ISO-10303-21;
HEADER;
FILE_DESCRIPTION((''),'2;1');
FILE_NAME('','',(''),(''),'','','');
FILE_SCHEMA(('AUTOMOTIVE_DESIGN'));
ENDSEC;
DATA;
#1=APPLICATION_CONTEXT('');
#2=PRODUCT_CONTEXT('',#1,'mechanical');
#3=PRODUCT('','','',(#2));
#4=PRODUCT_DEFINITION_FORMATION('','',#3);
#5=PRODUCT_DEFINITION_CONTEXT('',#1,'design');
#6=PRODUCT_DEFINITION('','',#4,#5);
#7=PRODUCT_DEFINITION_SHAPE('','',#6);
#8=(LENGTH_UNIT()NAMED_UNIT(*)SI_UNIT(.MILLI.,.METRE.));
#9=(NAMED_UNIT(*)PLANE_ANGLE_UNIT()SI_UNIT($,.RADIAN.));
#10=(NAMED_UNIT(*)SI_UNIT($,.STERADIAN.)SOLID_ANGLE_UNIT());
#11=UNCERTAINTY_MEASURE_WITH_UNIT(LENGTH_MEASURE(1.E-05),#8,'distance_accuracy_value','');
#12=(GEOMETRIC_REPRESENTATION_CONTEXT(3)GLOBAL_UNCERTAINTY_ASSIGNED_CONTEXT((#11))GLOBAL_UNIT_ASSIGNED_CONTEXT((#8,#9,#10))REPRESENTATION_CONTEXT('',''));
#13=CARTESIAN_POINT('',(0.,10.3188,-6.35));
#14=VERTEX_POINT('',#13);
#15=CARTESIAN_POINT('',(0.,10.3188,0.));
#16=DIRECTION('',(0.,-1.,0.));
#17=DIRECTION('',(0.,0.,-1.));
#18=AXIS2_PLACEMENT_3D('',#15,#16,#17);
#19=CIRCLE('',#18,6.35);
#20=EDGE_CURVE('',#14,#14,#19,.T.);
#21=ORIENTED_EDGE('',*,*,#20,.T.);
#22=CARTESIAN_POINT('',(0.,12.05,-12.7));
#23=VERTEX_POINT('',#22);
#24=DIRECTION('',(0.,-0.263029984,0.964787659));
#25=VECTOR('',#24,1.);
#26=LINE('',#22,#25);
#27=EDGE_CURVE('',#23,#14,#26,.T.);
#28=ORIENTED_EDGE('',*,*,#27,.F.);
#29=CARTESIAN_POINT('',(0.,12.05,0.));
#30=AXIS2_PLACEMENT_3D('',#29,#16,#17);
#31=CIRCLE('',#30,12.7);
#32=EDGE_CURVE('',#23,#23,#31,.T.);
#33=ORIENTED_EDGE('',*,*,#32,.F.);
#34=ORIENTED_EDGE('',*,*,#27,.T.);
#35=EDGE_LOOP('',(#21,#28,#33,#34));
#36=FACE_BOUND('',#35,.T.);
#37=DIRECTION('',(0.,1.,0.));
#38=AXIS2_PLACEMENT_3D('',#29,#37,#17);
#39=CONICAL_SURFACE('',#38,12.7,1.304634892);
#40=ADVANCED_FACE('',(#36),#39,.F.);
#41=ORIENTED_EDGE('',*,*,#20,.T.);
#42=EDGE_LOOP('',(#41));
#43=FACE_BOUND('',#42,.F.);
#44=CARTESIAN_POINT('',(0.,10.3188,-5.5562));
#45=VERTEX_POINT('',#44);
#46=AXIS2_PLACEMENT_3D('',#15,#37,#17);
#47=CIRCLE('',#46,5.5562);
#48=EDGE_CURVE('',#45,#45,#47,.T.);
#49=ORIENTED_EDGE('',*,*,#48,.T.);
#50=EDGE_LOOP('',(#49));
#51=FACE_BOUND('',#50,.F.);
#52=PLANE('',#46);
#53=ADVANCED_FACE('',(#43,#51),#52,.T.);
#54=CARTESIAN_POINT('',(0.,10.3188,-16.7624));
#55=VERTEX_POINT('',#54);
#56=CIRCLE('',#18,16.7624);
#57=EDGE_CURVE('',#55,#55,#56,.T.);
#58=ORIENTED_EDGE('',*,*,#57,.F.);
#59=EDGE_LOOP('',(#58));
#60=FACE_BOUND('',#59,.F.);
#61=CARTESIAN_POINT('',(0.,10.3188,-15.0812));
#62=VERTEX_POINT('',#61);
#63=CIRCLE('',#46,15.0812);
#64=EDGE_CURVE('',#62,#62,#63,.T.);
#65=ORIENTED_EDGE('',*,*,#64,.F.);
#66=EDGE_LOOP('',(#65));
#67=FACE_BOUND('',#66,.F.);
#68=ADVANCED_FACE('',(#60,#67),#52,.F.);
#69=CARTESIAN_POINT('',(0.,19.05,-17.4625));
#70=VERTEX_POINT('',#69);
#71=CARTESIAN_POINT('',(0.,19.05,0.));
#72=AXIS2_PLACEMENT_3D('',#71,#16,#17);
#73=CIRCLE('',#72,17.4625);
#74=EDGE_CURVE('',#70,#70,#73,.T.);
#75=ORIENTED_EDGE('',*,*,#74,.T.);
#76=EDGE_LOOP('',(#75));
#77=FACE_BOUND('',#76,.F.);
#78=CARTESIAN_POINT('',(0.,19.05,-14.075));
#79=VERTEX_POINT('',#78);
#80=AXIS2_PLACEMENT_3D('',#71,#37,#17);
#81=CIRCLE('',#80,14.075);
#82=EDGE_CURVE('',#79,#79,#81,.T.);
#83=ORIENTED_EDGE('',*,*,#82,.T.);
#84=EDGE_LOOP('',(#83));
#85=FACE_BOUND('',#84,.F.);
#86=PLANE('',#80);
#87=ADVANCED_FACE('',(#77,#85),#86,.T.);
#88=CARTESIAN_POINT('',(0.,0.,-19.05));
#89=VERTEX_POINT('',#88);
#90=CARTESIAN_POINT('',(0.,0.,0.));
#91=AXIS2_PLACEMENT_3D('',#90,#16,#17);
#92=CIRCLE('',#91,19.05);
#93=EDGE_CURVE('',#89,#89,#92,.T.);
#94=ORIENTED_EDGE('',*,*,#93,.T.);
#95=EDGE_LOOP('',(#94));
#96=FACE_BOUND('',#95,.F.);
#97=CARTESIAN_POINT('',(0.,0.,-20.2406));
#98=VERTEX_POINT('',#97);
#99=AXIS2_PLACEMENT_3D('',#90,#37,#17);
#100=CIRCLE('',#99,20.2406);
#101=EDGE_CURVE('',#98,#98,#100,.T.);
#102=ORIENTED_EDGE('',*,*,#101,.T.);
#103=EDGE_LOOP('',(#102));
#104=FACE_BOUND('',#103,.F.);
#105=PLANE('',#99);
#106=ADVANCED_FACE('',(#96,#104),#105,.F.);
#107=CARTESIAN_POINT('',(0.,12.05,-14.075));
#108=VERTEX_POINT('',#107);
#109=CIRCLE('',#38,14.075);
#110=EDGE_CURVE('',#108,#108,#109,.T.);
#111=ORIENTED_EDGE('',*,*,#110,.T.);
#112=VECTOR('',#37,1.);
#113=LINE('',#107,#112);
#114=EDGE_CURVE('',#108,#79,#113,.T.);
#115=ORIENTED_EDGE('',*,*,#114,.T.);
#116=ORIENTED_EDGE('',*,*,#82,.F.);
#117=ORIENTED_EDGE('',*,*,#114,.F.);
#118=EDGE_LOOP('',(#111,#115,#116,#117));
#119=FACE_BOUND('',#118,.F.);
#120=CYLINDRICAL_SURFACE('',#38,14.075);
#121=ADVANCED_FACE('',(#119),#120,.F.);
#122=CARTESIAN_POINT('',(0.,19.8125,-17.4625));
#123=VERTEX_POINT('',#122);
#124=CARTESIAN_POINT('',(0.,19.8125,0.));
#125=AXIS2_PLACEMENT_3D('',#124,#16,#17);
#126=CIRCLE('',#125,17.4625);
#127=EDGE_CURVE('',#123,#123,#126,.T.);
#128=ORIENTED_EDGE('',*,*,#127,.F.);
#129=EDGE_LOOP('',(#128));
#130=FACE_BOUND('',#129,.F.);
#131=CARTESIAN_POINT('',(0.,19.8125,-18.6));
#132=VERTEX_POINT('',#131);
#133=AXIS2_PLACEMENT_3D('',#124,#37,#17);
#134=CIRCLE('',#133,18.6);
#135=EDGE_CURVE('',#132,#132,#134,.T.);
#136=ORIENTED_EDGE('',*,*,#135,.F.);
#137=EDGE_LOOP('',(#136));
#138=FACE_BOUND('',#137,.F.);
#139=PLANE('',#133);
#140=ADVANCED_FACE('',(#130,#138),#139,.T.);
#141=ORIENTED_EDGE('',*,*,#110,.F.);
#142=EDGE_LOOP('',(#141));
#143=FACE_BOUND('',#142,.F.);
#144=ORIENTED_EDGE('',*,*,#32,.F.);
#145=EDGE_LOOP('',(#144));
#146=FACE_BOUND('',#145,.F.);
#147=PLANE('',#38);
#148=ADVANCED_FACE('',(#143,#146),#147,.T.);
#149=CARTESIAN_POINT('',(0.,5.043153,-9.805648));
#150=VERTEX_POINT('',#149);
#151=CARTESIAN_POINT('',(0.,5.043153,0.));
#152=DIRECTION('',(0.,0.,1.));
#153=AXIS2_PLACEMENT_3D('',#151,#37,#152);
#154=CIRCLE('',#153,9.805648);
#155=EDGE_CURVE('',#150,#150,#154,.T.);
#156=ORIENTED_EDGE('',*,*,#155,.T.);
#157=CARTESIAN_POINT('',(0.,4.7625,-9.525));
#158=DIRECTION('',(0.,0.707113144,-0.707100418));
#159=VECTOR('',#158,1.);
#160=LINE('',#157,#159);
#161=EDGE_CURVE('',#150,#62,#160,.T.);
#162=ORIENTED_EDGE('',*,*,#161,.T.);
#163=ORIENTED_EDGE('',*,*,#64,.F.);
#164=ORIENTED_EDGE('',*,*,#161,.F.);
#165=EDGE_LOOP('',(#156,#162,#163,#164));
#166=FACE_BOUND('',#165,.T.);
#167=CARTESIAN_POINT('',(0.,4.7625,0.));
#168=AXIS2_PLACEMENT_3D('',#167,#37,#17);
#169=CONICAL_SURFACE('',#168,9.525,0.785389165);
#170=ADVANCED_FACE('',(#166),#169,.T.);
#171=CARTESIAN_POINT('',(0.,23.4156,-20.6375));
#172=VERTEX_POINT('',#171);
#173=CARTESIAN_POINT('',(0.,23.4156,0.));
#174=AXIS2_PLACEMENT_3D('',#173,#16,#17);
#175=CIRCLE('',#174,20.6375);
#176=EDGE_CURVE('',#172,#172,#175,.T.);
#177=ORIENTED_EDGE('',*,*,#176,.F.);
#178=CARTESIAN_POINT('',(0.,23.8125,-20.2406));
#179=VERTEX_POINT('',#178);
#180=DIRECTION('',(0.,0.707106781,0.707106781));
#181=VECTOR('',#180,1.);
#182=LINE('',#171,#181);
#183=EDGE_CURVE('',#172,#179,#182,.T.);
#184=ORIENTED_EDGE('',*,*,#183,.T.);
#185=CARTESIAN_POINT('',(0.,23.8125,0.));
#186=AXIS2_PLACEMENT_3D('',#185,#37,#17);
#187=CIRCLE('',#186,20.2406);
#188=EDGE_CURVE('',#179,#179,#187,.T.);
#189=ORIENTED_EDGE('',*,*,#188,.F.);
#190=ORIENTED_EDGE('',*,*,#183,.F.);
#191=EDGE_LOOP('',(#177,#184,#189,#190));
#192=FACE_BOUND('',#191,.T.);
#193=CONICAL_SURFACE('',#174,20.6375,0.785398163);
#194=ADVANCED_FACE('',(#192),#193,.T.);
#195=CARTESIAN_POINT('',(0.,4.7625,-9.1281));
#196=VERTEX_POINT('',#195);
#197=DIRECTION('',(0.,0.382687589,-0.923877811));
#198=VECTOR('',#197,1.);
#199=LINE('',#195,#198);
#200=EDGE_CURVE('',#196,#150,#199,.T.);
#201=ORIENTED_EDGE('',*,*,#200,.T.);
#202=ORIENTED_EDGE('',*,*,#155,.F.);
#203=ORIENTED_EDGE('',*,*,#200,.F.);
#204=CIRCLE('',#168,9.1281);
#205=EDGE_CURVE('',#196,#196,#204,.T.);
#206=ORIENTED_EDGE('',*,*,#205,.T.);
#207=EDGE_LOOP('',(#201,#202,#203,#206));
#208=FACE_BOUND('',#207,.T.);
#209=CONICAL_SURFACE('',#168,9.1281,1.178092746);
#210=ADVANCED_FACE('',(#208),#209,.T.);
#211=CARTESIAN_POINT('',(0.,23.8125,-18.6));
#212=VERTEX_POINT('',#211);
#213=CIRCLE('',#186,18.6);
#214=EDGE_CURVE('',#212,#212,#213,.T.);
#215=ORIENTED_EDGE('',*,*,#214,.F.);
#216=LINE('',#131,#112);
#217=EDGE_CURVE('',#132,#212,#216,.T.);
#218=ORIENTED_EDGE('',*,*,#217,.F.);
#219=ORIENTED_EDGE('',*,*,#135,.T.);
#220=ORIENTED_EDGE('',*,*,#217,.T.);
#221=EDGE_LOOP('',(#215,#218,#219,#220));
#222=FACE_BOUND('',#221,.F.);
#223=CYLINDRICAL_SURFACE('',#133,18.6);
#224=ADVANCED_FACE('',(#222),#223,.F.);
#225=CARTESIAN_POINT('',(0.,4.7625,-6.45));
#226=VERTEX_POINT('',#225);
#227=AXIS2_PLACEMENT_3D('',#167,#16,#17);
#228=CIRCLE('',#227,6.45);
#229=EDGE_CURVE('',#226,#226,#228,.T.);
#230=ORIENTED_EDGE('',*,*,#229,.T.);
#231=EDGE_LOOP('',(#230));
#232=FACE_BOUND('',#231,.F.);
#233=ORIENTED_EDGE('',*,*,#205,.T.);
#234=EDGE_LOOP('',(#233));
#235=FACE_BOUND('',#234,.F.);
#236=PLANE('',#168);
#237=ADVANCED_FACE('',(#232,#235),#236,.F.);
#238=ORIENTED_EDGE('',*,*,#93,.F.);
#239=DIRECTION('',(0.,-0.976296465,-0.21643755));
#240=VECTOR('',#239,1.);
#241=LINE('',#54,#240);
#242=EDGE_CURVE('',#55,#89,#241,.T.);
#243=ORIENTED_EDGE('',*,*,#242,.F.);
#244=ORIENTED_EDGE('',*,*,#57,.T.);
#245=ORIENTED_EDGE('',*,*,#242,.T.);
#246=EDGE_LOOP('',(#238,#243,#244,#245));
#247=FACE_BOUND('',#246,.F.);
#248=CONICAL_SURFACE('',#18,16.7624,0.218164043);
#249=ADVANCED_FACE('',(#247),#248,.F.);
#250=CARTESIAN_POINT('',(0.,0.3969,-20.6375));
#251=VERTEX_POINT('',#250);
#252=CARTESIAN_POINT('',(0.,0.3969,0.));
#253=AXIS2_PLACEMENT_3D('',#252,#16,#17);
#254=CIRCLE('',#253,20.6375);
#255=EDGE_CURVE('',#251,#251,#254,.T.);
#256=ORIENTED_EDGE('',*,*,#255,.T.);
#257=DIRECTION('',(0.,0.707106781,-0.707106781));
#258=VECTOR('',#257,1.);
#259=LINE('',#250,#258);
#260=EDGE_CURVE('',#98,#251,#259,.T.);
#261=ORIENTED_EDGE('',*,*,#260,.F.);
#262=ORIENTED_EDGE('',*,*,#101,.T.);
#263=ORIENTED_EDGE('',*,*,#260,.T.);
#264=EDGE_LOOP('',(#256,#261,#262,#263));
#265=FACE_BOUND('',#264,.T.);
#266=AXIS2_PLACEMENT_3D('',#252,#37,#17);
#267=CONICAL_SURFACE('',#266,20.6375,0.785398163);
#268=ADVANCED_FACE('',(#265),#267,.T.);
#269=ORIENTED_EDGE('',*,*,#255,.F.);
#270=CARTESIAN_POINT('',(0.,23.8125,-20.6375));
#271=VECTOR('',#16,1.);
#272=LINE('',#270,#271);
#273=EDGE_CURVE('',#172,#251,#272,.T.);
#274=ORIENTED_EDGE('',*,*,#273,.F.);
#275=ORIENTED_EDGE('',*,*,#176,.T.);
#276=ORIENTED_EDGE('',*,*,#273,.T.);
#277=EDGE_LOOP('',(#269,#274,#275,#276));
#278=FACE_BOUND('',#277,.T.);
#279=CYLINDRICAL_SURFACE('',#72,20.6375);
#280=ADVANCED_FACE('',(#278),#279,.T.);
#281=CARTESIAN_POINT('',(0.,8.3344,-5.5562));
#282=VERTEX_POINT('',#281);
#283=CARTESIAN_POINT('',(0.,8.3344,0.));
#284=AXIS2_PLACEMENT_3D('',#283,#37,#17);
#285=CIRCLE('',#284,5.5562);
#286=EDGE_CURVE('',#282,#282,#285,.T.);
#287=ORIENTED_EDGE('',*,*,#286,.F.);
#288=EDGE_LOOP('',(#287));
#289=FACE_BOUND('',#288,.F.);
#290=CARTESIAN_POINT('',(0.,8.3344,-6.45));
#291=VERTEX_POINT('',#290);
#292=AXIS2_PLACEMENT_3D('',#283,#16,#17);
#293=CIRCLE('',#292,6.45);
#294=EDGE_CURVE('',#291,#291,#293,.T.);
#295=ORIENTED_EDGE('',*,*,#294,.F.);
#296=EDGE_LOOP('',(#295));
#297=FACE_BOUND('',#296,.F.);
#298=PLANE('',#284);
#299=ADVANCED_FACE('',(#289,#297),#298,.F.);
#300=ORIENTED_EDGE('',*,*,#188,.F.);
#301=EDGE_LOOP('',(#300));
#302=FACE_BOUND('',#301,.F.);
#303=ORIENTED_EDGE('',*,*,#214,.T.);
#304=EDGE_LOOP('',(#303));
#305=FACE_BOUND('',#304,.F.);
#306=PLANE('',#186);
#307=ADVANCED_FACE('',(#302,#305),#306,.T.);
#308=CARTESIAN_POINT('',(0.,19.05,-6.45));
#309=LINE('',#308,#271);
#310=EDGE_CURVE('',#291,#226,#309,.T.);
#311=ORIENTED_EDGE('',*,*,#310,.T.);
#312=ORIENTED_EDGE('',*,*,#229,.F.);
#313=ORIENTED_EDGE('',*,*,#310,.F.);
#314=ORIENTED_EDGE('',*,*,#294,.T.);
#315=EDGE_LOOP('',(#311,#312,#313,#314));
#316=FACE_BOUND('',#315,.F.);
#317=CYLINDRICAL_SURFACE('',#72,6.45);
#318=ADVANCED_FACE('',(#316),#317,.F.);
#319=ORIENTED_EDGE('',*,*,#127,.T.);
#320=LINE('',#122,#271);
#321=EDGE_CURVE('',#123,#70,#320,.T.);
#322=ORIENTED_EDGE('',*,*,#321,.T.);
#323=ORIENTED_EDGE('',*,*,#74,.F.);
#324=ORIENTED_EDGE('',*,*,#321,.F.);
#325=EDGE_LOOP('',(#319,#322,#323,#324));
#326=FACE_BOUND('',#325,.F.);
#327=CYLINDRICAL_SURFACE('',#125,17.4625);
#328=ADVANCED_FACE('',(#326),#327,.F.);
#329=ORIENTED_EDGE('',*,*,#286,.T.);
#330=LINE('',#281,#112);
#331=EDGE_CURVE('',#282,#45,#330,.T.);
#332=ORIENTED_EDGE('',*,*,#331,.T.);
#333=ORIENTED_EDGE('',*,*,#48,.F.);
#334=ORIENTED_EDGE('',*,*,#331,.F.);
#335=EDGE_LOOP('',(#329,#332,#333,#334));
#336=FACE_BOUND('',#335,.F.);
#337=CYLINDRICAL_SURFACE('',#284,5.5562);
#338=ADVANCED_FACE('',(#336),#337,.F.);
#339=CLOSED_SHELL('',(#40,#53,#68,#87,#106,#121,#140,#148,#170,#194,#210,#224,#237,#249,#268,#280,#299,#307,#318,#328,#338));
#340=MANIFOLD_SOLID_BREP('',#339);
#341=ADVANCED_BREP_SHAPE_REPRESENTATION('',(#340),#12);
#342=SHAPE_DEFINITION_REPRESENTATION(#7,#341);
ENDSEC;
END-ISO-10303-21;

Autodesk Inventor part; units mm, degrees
ref_plane "YZ Plane" through (0, 0, 0) normal (1, 0, 0) x (0, 1, 0)
ref_plane "XZ Plane" through (0, 0, 0) normal (0, 1, 0) x (-1, 0, 0)
ref_plane "XY Plane" through (0, 0, 0) normal (0, 0, 1) x (1, 0, 0)
sketch "Sketch2" plane through (0, 0, 0) normal (1, 0, 0) x (0, 1, 0)
  line L0 (0, 0) -> (19.05, 0)
  line L1 (19.05, 0) -> (19.05, -6.35)
  line L2 (19.05, -6.35) -> (0, -6.35)
  line L3 (0, -6.35) -> (0, 0)
  line L4 (0, 0) -> (19.05, 0)
  line L5 (19.05, 0) -> (19.05, -20.6375)
  line L6 (19.05, -20.6375) -> (0, -20.6375)
  line L7 (0, -20.6375) -> (0, 0)
  line L8 (0, -16.7624) -> (10.3188, -16.7624) construction
  line L9 (10.3188, -16.7624) -> (10.3188, -6.35)
  line L10 (10.3188, -6.35) -> (0, -6.35)
  line L11 (0, -6.35) -> (0, -16.7624)
  line L12 (10.3188, -16.7624) -> (0, -19.05)
  line L13 (6.35, -20.6375) -> (19.05, -17.4625)
  line L14 (19.05, 0) -> (12.05, 0)
  line L15 (12.05, 0) -> (12.05, -13.975)
  line L16 (12.05, -13.975) -> (19.05, -13.975)
  line L17 (19.05, -13.975) -> (19.05, 0)
  line L18 (10.3188, -15.0812) -> (4.7625, -15.0812)
  line L19 (4.7625, -15.0812) -> (4.7625, -6.35)
  line L20 (4.7625, -6.35) -> (10.3188, -6.35)
  line L21 (10.3188, -6.35) -> (10.3188, -15.0812)
  line L22 (4.7625, -9.525) -> (10.3188, -15.0812)
  line L23 (19.05, 0) -> (23.8125, 0)
  line L24 (23.8125, 0) -> (23.8125, -20.6375)
  line L25 (23.8125, -20.6375) -> (19.05, -20.6375)
  line L26 (19.05, -20.6375) -> (19.05, 0)
  line L27 (23.8125, 0) -> (19.8125, 0)
  line L28 (19.8125, 0) -> (19.8125, -18.5)
  line L29 (19.8125, -18.5) -> (23.8125, -18.5)
  line L30 (23.8125, -18.5) -> (23.8125, 0)
  line L31 (19.8125, -17.4625) -> (19.05, -17.4625)
  line L32 (12.05, -12.7) -> (10.3188, -6.35)
  line L33 (10.3188, -6.35) -> (8.3344, -6.35)
  line L34 (8.3344, -6.35) -> (8.3344, -5.5562)
  line L35 (8.3344, -5.5562) -> (10.3188, -5.5562)
  line L36 (10.3188, -5.5562) -> (10.3188, -6.35)
  point P0 (19.05, -13.975)
  point P1 (12.05, -6.35)
  point P2 (4.7625, -6.35)
  point P3 (12.05, 0)
  point P4 (23.8125, -18.5)
  point P5 (10.3188, -6.35)
  point P6 (10.3188, -6.35)
  dimension "d4" = 19.05
  dimension "d5" = 6.35
  dimension "d6" = 20.6375
  dimension "d7" = 12.5
  dimension "d9" = 10.3187
  dimension "d11" = 19.05
  dimension "d35" = 6.35
  dimension "d36" = 7
  dimension "d37" = 13.975
  dimension "d38" = 17.4625
  dimension "d41" = 4.7625
  dimension "d42" = 5.5563
  dimension "d43" = 3.175
  dimension "d54" = 4.7625
  dimension "d55" = 4
  dimension "d56" = 18.5
  dimension "d57" = 12.7
  dimension "d58" = 1.9844
  dimension "d59" = 0.7937
revolve "Revolution1" add sketch "Sketch2" angle 360 about axis through (0, 0, 0) along (0, 1, 0) contours L2 L9 L22 L19 | L32 L15 L16 L5 L13 L6 L7 L12 L9 | L2 L34 L35 L36 | L28 L29 L24 L25 L5 L31 | L5 L6 L13
chamfer "Chamfer1" distance 0.3969 angle 45 3 edges at (0, 0, 20.6375) (0, 4.7625, 9.525) (0, 23.8125, 20.6375)
thicken "Thicken1" operation cut thickness 0.1 both sides no extend neighbours no toward (0.1604113, 0, -0.9870503) faces at (2.9676, 22.4792, -18.2604)
thicken "Thicken2" operation cut thickness 0.1 both sides no extend neighbours no toward (0.0804666, 0, -0.9967573) faces at (1.1245, 16.7167, -13.9297)
thicken "Thicken4" operation add thickness 0.1 both sides no extend neighbours yes toward (0.0804666, 0, -0.9967573) faces at (0.511, 5.9531, -6.3294)
properties part number "Flywheel" material "Brass, Soft Yellow"
